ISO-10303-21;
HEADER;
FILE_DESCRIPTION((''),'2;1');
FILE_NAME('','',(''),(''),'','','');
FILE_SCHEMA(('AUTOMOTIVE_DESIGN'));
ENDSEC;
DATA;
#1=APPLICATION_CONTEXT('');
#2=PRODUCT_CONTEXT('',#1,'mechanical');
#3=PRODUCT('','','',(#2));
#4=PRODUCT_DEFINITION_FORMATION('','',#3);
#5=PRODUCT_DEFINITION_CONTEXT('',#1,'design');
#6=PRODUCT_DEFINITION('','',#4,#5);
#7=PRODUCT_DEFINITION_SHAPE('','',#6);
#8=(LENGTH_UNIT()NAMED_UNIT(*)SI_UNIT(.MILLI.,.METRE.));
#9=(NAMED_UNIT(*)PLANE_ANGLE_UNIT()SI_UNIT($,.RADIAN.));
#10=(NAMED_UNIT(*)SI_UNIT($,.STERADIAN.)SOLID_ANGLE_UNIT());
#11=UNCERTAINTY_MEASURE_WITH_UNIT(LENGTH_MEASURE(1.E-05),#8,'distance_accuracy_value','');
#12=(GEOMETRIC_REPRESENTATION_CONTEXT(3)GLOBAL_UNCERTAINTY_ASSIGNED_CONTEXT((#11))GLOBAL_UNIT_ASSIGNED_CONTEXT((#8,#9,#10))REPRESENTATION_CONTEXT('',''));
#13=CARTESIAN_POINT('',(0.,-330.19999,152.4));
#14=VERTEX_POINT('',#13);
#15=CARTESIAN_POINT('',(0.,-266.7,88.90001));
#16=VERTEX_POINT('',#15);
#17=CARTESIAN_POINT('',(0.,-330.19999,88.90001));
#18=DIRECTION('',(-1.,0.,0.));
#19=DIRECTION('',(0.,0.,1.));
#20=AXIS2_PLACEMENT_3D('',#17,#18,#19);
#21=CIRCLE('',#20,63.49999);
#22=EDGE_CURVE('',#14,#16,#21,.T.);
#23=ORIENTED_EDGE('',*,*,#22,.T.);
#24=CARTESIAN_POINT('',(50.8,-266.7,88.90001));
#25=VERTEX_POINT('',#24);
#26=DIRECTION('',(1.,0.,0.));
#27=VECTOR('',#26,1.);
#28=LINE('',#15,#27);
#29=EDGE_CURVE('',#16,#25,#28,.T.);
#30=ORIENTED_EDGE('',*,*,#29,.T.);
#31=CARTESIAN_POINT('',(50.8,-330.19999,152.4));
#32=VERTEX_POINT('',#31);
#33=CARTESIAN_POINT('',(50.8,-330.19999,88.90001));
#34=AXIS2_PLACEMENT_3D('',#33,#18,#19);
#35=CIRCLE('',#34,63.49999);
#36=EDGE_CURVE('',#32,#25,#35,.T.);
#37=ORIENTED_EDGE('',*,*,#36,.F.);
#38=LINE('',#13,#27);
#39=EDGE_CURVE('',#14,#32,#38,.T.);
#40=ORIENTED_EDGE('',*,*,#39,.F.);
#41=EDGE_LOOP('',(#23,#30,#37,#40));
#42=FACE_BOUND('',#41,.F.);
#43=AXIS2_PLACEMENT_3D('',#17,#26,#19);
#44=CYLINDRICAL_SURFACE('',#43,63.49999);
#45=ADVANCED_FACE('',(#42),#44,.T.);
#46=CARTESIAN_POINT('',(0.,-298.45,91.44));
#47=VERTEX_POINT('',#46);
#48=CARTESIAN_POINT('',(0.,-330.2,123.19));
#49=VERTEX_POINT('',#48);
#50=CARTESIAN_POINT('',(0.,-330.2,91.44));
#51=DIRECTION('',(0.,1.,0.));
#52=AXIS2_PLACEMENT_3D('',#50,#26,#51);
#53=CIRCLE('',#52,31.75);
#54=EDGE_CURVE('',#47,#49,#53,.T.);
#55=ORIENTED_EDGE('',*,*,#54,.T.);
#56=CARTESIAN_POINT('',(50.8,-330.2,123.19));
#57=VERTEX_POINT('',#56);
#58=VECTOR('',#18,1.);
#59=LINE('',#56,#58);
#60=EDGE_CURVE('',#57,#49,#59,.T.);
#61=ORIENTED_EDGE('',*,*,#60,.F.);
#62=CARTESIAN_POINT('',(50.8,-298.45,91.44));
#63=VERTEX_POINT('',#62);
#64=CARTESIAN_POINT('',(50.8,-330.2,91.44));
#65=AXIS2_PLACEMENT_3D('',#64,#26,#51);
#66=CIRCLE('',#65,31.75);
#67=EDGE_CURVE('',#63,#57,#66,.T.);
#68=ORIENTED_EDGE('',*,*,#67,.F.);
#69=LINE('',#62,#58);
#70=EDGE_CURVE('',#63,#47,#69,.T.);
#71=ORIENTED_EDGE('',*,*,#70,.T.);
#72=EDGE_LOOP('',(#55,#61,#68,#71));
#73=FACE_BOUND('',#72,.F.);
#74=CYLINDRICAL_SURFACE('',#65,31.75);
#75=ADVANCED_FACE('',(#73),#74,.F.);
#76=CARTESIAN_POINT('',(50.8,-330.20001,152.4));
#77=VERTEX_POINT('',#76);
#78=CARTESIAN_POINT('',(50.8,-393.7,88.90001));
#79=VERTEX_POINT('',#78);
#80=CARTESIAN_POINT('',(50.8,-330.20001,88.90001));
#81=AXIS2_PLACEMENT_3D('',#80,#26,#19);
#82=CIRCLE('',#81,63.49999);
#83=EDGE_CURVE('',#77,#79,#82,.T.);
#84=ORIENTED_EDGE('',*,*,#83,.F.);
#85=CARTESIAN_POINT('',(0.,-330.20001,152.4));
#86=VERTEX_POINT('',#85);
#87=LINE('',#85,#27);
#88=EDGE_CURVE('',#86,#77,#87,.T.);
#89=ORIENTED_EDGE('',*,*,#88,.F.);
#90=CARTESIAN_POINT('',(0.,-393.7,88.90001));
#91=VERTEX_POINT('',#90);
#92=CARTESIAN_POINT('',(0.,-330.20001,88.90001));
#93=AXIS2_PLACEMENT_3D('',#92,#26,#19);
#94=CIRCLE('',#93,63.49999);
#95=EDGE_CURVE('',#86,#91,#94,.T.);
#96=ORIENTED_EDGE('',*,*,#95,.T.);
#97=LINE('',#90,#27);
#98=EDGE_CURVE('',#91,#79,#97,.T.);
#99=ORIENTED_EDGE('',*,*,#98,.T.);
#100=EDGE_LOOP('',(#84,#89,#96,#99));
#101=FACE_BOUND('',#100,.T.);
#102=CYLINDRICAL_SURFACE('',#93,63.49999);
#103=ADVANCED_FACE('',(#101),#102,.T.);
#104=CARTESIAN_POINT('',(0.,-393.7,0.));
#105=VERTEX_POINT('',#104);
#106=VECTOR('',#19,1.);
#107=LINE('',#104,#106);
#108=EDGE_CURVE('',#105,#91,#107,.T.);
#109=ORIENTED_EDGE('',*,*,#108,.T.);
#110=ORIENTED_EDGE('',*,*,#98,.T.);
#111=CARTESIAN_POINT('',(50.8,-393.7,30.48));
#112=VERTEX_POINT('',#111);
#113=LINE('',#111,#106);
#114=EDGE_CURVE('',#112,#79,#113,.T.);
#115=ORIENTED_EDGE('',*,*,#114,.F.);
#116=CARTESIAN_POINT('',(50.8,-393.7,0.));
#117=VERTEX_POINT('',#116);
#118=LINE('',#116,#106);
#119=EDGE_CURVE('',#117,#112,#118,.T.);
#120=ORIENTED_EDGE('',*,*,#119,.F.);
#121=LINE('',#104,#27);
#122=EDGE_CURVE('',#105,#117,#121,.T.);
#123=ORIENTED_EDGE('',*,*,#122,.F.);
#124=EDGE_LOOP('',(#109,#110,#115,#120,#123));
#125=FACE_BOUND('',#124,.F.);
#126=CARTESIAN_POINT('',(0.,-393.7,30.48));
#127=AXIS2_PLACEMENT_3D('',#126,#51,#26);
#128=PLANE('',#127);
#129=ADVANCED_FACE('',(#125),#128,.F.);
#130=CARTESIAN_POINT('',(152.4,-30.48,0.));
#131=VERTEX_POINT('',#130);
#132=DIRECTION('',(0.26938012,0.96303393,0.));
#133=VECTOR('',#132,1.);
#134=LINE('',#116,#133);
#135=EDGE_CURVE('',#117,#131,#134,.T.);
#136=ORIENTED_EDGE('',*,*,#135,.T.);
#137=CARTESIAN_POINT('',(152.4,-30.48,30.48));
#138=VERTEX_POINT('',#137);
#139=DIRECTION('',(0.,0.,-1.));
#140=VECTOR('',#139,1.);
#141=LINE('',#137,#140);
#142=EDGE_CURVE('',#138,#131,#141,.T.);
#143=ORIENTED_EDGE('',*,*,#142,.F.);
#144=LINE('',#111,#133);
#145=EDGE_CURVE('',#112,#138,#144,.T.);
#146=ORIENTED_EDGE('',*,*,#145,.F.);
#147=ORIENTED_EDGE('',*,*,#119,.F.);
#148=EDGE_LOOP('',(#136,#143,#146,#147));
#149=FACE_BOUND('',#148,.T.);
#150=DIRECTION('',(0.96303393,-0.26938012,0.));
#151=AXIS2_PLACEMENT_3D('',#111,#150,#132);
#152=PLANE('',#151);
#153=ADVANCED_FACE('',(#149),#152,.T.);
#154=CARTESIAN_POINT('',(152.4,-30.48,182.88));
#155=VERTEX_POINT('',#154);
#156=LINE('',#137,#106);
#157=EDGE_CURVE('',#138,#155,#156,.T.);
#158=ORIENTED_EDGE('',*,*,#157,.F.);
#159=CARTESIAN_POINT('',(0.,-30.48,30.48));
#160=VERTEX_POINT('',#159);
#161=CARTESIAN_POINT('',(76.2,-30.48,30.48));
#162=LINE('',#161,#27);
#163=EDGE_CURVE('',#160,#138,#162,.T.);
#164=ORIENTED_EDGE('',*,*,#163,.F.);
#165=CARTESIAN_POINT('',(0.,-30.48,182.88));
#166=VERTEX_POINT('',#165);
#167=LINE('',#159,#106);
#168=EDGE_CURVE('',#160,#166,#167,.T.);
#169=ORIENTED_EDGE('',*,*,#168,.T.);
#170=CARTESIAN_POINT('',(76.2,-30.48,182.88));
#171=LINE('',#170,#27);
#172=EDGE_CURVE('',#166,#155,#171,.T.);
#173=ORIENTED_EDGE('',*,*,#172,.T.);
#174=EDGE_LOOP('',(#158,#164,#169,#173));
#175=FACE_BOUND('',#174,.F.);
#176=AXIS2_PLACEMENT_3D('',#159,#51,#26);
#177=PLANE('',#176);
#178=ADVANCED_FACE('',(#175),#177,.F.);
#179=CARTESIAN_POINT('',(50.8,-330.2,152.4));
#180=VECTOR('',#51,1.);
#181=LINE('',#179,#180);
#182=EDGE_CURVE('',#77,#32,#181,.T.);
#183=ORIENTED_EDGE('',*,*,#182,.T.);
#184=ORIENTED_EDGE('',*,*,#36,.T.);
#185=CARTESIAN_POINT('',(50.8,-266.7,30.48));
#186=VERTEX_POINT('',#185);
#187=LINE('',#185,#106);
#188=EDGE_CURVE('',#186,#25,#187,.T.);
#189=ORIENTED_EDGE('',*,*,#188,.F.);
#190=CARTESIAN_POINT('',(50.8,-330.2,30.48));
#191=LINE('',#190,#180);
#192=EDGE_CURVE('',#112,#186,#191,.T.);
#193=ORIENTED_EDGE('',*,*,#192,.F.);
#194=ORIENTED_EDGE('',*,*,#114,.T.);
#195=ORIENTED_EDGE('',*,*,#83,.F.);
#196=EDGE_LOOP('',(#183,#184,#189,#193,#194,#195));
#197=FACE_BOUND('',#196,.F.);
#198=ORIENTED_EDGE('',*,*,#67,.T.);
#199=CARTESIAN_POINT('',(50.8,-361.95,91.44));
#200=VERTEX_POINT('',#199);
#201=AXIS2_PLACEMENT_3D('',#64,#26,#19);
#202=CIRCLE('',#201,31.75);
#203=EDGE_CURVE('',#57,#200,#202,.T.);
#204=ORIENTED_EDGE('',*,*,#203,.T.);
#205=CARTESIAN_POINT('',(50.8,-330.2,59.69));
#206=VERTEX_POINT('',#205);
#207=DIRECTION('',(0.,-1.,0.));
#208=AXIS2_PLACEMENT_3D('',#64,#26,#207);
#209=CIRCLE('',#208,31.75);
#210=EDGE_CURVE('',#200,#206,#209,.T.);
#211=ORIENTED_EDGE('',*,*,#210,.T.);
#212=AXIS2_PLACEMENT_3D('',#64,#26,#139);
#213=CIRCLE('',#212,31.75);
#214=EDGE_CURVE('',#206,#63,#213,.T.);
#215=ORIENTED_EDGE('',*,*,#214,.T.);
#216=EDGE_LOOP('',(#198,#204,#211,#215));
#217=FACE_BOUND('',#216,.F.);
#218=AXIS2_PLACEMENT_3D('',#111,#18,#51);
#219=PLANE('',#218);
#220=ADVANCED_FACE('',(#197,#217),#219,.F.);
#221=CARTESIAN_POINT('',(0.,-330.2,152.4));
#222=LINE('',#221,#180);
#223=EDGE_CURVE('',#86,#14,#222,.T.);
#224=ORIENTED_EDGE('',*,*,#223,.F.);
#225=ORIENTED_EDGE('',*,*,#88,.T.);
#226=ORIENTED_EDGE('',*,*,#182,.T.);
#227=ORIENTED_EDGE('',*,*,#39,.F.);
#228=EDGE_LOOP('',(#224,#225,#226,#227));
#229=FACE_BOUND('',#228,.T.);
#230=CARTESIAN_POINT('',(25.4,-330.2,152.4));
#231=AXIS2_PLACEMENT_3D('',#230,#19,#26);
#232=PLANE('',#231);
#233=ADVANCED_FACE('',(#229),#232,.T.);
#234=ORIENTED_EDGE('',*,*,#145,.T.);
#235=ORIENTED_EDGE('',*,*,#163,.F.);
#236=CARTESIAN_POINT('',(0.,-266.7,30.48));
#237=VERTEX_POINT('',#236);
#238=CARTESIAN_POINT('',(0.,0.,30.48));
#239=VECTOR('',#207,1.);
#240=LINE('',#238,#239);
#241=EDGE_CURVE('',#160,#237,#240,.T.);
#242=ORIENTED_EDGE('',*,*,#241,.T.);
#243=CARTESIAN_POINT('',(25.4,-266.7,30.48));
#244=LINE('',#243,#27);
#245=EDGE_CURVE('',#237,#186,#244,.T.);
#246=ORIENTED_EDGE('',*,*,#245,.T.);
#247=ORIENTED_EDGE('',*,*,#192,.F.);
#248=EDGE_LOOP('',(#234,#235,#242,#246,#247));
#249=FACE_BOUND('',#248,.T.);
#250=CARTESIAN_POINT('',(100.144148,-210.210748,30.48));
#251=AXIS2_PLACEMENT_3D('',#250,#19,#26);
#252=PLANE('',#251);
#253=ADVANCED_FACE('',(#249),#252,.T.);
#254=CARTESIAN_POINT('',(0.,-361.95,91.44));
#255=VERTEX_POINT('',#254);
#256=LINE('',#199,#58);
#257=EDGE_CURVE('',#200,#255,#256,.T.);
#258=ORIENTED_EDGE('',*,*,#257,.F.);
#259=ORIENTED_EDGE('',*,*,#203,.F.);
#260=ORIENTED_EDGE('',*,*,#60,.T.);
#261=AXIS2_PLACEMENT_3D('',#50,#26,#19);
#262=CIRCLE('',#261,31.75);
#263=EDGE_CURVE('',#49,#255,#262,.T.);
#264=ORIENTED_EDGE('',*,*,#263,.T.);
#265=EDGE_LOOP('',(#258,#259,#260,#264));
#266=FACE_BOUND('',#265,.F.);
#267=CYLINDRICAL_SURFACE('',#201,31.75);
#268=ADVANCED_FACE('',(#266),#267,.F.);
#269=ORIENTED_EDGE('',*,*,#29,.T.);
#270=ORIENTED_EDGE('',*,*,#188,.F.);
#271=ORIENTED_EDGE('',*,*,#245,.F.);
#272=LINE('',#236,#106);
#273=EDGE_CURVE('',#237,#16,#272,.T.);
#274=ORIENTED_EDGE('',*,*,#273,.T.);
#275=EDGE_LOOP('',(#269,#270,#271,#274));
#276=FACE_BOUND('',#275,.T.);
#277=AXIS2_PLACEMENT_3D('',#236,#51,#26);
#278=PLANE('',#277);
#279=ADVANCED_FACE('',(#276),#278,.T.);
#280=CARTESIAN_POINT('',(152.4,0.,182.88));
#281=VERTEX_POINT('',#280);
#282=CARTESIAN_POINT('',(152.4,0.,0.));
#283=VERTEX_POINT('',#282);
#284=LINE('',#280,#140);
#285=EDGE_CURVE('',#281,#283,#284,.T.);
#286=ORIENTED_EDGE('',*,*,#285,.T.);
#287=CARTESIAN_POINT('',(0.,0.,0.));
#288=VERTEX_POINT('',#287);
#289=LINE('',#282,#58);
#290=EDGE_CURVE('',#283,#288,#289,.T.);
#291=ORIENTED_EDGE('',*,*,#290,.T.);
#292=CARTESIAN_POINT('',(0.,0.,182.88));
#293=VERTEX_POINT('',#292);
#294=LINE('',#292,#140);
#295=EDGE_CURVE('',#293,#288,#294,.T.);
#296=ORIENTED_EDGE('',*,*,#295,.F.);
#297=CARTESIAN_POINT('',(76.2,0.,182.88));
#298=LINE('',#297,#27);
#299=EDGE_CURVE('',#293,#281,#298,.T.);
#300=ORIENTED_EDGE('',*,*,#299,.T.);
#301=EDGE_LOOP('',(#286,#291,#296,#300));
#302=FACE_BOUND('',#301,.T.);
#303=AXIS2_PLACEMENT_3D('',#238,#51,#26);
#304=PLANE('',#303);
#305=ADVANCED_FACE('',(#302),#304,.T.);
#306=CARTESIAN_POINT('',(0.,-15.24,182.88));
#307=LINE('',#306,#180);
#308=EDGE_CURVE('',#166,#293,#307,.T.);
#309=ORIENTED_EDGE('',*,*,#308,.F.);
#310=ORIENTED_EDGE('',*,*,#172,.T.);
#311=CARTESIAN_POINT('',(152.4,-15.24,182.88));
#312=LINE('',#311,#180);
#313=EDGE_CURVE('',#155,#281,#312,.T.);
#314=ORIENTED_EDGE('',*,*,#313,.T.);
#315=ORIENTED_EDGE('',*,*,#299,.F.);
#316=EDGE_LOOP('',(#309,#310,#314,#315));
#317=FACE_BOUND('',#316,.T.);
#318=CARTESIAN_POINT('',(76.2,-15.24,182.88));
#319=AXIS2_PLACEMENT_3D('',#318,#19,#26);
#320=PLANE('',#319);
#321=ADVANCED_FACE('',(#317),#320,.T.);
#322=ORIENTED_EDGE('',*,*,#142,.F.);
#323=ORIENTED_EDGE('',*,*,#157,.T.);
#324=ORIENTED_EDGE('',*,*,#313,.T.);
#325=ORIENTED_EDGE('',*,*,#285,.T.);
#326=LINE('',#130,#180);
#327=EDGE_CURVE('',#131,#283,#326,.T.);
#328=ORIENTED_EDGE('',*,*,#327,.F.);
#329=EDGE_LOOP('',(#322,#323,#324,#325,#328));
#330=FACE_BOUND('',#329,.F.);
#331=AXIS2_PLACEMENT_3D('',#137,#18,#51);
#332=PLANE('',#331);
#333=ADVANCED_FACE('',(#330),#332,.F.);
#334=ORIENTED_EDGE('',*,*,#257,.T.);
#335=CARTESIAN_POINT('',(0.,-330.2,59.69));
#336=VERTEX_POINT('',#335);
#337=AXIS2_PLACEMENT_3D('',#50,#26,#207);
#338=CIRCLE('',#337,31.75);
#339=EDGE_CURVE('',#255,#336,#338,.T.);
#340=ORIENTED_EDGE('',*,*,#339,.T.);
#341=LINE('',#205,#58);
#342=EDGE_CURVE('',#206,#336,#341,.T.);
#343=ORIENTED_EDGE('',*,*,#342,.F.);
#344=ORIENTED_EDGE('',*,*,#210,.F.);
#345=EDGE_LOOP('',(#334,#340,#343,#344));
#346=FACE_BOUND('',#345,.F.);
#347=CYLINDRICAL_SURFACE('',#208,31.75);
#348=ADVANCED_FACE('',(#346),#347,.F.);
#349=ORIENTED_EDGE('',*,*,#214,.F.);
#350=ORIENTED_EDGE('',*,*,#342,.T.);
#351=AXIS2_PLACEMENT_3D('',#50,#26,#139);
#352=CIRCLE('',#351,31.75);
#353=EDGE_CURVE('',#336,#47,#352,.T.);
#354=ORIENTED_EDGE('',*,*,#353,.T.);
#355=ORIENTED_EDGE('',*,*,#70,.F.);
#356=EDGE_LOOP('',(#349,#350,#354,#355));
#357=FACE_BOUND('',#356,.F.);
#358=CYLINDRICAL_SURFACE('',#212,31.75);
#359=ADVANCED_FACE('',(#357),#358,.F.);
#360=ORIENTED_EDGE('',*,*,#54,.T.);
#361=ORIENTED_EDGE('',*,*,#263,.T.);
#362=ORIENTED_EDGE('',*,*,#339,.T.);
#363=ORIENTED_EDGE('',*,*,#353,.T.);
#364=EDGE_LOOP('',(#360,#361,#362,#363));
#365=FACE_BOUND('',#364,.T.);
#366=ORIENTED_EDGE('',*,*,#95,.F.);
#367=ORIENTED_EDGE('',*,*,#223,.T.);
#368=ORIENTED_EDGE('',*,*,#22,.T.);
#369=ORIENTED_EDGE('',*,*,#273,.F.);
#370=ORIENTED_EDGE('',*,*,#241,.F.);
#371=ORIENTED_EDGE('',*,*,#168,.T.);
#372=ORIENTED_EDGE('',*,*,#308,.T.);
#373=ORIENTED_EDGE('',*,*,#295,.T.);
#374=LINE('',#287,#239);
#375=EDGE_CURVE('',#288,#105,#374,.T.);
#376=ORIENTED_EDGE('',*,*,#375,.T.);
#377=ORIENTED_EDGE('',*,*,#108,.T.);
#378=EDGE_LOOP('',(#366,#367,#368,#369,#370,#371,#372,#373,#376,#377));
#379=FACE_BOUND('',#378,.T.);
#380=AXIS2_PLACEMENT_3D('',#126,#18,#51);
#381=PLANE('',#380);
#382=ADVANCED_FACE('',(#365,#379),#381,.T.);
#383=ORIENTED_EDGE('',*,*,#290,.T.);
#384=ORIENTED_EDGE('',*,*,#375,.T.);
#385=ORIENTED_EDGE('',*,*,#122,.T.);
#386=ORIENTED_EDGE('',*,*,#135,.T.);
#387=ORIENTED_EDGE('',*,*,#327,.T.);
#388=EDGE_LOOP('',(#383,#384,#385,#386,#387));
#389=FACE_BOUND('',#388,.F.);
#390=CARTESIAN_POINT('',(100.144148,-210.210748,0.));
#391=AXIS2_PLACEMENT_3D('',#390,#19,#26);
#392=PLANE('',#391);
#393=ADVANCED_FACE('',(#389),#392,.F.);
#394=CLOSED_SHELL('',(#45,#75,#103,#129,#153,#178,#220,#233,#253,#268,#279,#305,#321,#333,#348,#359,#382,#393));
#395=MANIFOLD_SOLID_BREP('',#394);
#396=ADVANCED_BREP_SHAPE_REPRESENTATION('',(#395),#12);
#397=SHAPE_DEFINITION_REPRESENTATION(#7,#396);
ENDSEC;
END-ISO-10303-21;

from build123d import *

# Parameters (mm, degrees)
F1_DEPTH  = 30.48
F3_DEPTH  = 30.48
F5_DEPTH  = 30.48
F6_W      = 152.4
F6_H      = 30.48
F7_DEPTH  = 152.4
F8_W      = 50.8
F8_H      = 127
F9_DEPTH  = 121.92
F11_DEPTH = 475.742
F12_R     = 63.49999


# Not quite as in the source:
# - a fillet or chamfer is up to 0.001 mm smaller than in the source, because OpenCascade refuses the exact size


with BuildPart() as f1:
    # F0 (on Top) → F1 (new body)
    with BuildSketch(Plane.XY):
        Polygon((152.4, 0), (0, 0), (0, -393.7), (50.8, -393.7), align=None)
    extrude(amount=F1_DEPTH)

    # F2 (on face) → F3 (join)
    with BuildSketch(Plane.XY.offset(30.48)):
        Polygon((152.4, -30.48), (152.4, 0), (144.5341935484, -30.48), align=None)
    extrude(amount=-F3_DEPTH)

    # F4 (on face) → F5 (join)
    with BuildSketch(Plane.XY.offset(30.48)):
        Polygon((50.8, -393.7), (152.4, -30.48), (144.5341935484, -30.48), align=None)
    extrude(amount=-F5_DEPTH)

    # F6 (on face) → F7 (join)
    with BuildSketch(Plane.XY.offset(30.48)):
        with Locations((76.2, -15.24)):
            Rectangle(F6_W, F6_H)
    extrude(amount=F7_DEPTH)

    # F8 (on face) → F9 (join)
    with BuildSketch(Plane.XY.offset(30.48)):
        with Locations((25.4, -330.2)):
            Rectangle(F8_W, F8_H)
    extrude(amount=F9_DEPTH)

    # F10 (on face) → F11 (cut)
    with BuildSketch(Plane.YZ.offset(50.8)):
        with BuildLine():
            Line((-330.2, 91.44), (-330.2, 123.19))
            ThreePointArc((-330.2, 123.19), (-352.6506403027, 113.8906403027), (-361.95, 91.44))
            Line((-361.95, 91.44), (-330.2, 91.44))
        make_face()
        with BuildLine():
            ThreePointArc((-298.45, 91.44), (-307.7493596973, 113.8906403027), (-330.2, 123.19))
            Line((-330.2, 123.19), (-330.2, 91.44))
            Line((-330.2, 91.44), (-298.45, 91.44))
        make_face()
        with BuildLine():
            Line((-330.2, 59.69), (-330.2, 91.44))
            Line((-330.2, 91.44), (-361.95, 91.44))
            ThreePointArc((-361.95, 91.44), (-352.6506403027, 68.9893596973), (-330.2, 59.69))
        make_face()
        with BuildLine():
            ThreePointArc((-330.2, 59.69), (-307.7493596973, 68.9893596973), (-298.45, 91.44))
            Line((-298.45, 91.44), (-330.2, 91.44))
            Line((-330.2, 91.44), (-330.2, 59.69))
        make_face()
    extrude(amount=-F11_DEPTH, mode=Mode.SUBTRACT)

    # F12 (radius 63.5 in the source; OpenCascade refuses exactly that, so slightly less here)
    f12_edges = [f1.edges().sort_by_distance(p)[0] for p in [
        (25.4, -393.7, 152.4),
        (25.4, -266.7, 152.4),
    ]]
    fillet(f12_edges, radius=F12_R)


solid = f1.part
